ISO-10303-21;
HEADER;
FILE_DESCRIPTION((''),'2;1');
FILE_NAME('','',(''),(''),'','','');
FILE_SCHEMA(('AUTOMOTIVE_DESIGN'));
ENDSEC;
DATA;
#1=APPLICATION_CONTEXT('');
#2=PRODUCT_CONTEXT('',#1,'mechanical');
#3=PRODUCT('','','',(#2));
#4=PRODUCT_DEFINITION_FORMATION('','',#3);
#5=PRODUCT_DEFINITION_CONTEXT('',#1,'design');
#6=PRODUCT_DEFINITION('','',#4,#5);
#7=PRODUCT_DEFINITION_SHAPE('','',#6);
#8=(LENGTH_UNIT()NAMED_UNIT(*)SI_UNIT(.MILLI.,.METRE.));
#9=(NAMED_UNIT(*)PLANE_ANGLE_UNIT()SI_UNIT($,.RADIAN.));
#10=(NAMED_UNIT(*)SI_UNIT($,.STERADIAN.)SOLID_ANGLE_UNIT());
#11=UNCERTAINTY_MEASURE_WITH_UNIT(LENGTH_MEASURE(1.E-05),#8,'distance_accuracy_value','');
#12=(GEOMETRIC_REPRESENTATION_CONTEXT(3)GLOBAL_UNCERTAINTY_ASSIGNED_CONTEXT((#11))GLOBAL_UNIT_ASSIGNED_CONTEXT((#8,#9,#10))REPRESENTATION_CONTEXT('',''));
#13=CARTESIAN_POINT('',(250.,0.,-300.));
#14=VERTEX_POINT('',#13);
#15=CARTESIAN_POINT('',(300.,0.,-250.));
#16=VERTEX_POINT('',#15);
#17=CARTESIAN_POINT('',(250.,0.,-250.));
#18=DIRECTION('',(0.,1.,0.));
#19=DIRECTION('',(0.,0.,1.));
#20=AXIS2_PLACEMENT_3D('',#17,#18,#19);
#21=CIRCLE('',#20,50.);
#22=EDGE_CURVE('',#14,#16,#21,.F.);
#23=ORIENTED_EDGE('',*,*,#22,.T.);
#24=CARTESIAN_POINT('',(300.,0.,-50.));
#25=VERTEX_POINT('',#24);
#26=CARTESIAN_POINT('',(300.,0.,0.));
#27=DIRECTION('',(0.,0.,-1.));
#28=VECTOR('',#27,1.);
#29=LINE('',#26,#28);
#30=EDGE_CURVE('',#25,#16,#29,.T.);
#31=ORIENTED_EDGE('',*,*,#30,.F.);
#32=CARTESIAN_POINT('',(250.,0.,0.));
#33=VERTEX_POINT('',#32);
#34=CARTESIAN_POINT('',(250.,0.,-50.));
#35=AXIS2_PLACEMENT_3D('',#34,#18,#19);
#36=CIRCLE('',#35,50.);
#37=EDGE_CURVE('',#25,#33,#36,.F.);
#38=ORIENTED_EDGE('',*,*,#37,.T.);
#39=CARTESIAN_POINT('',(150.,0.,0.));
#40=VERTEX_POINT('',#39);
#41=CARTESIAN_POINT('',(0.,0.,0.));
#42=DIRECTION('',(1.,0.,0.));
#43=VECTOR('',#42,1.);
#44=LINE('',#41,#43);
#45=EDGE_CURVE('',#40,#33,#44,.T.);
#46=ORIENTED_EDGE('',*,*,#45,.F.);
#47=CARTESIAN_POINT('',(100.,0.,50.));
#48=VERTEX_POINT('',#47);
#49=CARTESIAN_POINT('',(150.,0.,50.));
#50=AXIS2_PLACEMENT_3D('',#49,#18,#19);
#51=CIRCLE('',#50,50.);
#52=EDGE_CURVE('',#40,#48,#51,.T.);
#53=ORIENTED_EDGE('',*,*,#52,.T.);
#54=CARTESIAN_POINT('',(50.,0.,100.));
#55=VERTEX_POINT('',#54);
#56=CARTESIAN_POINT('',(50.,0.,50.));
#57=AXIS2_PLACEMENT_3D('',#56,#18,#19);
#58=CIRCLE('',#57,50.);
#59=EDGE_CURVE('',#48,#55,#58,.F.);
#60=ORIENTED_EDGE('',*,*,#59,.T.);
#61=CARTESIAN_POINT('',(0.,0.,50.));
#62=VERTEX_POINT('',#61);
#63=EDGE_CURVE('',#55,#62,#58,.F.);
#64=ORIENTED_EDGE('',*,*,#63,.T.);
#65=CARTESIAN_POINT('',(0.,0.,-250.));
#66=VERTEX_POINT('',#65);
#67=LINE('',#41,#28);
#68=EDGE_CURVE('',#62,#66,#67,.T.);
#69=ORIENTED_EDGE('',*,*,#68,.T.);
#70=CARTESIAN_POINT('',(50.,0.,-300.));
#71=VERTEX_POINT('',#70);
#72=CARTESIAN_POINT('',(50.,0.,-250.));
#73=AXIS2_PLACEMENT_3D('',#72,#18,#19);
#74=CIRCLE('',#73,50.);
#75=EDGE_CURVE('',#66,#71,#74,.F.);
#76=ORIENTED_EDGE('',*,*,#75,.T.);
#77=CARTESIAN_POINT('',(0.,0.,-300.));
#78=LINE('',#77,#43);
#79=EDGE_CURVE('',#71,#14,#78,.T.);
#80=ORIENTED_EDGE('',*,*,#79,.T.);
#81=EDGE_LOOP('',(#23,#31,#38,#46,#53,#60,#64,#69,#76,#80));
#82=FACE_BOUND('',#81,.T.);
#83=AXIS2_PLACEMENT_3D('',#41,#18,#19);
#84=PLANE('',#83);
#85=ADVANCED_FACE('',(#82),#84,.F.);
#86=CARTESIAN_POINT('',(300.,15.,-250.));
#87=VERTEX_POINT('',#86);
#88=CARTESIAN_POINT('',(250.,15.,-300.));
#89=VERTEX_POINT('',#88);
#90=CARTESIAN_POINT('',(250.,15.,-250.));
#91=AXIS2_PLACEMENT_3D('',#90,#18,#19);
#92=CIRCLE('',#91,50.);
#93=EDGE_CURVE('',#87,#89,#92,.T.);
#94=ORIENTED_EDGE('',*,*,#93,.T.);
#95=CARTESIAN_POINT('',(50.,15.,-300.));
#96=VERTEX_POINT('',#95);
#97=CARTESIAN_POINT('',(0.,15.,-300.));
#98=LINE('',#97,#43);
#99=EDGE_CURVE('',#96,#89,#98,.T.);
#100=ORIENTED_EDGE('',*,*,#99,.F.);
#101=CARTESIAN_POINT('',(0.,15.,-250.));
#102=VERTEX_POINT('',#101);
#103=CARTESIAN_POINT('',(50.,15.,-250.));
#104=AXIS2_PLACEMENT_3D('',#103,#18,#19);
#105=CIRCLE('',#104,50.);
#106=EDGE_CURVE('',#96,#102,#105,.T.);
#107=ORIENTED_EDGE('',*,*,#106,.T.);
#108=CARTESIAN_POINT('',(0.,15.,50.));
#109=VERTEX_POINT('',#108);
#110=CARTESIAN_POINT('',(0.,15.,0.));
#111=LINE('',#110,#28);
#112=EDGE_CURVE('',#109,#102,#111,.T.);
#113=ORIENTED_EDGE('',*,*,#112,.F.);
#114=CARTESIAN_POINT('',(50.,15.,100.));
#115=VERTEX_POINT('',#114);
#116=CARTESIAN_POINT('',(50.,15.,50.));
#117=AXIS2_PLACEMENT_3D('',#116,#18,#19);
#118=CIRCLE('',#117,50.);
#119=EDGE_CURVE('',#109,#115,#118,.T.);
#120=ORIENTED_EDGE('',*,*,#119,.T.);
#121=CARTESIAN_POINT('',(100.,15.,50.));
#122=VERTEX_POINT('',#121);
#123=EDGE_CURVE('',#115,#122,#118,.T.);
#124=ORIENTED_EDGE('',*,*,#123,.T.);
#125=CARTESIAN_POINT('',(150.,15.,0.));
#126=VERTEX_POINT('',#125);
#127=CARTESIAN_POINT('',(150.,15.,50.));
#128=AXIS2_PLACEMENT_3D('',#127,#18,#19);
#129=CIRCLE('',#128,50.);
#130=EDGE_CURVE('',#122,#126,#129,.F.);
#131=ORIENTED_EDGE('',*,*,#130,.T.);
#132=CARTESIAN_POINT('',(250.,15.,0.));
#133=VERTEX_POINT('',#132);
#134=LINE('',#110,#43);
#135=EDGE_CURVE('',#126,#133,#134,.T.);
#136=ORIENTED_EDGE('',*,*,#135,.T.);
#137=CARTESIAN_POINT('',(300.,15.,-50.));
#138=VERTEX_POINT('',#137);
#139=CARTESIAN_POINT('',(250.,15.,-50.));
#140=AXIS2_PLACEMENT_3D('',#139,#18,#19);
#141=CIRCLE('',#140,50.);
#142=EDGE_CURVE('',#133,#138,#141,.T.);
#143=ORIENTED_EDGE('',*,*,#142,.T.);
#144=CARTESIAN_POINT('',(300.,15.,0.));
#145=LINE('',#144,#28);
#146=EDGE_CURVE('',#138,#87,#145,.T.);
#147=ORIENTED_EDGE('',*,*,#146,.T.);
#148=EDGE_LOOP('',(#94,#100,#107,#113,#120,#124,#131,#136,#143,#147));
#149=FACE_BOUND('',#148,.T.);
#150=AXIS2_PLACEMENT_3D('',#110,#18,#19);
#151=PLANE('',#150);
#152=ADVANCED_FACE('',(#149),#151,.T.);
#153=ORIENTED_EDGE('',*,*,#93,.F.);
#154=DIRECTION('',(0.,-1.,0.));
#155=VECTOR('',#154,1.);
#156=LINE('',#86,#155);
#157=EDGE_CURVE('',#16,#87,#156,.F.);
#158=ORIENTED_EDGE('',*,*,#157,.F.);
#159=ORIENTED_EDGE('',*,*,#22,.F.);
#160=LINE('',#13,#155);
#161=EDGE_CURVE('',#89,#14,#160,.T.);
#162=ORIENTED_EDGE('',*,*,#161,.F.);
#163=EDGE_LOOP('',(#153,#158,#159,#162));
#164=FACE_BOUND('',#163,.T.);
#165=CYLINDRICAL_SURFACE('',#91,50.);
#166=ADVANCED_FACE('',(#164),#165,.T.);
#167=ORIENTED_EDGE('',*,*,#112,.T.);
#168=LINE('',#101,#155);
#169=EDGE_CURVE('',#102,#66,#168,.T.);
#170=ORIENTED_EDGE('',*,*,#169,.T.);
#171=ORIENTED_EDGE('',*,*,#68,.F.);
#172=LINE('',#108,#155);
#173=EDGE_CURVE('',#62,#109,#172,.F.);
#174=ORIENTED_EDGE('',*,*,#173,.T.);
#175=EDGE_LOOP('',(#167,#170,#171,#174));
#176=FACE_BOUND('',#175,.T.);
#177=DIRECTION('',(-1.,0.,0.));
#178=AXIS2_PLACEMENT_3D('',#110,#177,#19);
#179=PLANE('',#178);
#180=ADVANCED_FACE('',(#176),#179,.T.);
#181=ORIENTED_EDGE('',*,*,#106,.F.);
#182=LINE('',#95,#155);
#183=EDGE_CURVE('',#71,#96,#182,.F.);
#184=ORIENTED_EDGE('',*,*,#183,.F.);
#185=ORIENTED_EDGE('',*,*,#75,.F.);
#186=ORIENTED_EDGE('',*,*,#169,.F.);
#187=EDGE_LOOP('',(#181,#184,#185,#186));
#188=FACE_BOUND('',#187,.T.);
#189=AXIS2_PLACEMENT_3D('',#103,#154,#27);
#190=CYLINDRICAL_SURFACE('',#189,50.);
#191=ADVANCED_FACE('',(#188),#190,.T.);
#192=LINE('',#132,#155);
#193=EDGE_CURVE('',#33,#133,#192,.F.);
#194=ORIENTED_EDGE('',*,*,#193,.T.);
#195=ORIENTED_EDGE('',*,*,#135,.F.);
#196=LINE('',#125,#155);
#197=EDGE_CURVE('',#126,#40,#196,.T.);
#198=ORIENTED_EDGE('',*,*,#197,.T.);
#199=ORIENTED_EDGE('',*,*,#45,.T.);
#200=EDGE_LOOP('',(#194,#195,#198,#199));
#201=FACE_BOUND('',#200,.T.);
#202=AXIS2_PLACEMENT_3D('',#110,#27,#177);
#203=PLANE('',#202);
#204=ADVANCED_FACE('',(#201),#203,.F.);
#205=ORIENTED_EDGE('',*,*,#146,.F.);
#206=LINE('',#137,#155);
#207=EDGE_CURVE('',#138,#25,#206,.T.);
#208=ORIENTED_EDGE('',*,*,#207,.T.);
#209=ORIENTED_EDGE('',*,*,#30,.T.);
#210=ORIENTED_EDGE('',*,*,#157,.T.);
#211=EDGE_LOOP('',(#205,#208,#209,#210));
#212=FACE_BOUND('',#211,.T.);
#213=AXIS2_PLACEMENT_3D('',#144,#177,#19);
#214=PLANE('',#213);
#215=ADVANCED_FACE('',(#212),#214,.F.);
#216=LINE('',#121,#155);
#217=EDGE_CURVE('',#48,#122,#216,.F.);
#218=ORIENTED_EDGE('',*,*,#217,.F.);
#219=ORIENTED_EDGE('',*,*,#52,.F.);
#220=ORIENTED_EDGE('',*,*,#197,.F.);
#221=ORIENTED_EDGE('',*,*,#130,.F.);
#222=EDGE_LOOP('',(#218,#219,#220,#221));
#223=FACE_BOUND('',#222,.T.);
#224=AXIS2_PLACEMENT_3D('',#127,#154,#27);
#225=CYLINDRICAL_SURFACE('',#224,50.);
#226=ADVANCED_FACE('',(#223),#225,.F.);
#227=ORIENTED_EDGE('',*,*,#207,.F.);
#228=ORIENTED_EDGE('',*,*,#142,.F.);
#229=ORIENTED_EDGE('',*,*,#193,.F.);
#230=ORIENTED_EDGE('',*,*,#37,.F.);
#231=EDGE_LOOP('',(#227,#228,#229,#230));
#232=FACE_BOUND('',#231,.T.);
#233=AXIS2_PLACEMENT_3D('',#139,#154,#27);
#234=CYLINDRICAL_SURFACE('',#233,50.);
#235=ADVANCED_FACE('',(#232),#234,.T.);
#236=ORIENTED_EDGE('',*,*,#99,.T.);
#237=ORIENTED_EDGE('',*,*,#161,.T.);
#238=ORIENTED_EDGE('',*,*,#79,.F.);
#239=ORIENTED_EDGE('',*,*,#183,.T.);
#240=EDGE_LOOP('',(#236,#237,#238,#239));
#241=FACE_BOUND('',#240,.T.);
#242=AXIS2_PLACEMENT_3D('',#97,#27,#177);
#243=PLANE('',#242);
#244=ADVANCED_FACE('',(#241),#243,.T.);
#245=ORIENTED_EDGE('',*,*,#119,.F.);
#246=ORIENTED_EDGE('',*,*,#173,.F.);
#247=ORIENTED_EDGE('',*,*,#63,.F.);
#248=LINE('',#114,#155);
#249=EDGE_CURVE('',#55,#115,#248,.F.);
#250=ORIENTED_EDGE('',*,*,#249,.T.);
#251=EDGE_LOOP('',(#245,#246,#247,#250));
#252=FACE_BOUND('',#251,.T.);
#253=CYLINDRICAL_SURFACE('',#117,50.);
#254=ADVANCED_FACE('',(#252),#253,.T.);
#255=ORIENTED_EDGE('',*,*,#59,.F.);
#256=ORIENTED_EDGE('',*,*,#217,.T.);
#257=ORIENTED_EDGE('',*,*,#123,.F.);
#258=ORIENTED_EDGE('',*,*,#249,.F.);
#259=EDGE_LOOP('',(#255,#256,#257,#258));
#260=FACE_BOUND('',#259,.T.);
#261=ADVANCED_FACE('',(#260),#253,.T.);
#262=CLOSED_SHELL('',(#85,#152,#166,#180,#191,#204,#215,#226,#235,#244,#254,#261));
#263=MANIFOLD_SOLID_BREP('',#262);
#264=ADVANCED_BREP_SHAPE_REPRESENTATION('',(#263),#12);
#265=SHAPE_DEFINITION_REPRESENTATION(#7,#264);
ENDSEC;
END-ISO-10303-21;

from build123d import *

# Parameters (mm, degrees)
SKETCH1_W           = 300
SKETCH1_H           = 300
SKETCH1_W_2         = 100
SKETCH1_H_2         = 100
BOSS_EXTRUDE1_DEPTH = 15
FILLET1_R           = 50


with BuildPart() as part:
    # Sketch1 → Boss-Extrude1 (new body)
    with BuildSketch(Plane(origin=(0, 0, 0), x_dir=(1, 0, 0), z_dir=(0, 1, 0))):
        with Locations((150, 150)):
            Rectangle(SKETCH1_W, SKETCH1_H)
        with Locations((50, -50)):
            Rectangle(SKETCH1_W_2, SKETCH1_H_2)
    extrude(amount=BOSS_EXTRUDE1_DEPTH)

    # Fillet1
    fillet1_edges = [part.edges().sort_by_distance(p)[0] for p in [
        (0, 7.5, -300),
        (0, 7.5, 100),
        (300, 7.5, -300),
        (300, 7.5, 0),
        (100, 7.5, 100),
        (100, 7.5, 0),
    ]]
    fillet(fillet1_edges, radius=FILLET1_R - 0.0001)  # a hair under: the kernel refuses the full size


solid = part.part
